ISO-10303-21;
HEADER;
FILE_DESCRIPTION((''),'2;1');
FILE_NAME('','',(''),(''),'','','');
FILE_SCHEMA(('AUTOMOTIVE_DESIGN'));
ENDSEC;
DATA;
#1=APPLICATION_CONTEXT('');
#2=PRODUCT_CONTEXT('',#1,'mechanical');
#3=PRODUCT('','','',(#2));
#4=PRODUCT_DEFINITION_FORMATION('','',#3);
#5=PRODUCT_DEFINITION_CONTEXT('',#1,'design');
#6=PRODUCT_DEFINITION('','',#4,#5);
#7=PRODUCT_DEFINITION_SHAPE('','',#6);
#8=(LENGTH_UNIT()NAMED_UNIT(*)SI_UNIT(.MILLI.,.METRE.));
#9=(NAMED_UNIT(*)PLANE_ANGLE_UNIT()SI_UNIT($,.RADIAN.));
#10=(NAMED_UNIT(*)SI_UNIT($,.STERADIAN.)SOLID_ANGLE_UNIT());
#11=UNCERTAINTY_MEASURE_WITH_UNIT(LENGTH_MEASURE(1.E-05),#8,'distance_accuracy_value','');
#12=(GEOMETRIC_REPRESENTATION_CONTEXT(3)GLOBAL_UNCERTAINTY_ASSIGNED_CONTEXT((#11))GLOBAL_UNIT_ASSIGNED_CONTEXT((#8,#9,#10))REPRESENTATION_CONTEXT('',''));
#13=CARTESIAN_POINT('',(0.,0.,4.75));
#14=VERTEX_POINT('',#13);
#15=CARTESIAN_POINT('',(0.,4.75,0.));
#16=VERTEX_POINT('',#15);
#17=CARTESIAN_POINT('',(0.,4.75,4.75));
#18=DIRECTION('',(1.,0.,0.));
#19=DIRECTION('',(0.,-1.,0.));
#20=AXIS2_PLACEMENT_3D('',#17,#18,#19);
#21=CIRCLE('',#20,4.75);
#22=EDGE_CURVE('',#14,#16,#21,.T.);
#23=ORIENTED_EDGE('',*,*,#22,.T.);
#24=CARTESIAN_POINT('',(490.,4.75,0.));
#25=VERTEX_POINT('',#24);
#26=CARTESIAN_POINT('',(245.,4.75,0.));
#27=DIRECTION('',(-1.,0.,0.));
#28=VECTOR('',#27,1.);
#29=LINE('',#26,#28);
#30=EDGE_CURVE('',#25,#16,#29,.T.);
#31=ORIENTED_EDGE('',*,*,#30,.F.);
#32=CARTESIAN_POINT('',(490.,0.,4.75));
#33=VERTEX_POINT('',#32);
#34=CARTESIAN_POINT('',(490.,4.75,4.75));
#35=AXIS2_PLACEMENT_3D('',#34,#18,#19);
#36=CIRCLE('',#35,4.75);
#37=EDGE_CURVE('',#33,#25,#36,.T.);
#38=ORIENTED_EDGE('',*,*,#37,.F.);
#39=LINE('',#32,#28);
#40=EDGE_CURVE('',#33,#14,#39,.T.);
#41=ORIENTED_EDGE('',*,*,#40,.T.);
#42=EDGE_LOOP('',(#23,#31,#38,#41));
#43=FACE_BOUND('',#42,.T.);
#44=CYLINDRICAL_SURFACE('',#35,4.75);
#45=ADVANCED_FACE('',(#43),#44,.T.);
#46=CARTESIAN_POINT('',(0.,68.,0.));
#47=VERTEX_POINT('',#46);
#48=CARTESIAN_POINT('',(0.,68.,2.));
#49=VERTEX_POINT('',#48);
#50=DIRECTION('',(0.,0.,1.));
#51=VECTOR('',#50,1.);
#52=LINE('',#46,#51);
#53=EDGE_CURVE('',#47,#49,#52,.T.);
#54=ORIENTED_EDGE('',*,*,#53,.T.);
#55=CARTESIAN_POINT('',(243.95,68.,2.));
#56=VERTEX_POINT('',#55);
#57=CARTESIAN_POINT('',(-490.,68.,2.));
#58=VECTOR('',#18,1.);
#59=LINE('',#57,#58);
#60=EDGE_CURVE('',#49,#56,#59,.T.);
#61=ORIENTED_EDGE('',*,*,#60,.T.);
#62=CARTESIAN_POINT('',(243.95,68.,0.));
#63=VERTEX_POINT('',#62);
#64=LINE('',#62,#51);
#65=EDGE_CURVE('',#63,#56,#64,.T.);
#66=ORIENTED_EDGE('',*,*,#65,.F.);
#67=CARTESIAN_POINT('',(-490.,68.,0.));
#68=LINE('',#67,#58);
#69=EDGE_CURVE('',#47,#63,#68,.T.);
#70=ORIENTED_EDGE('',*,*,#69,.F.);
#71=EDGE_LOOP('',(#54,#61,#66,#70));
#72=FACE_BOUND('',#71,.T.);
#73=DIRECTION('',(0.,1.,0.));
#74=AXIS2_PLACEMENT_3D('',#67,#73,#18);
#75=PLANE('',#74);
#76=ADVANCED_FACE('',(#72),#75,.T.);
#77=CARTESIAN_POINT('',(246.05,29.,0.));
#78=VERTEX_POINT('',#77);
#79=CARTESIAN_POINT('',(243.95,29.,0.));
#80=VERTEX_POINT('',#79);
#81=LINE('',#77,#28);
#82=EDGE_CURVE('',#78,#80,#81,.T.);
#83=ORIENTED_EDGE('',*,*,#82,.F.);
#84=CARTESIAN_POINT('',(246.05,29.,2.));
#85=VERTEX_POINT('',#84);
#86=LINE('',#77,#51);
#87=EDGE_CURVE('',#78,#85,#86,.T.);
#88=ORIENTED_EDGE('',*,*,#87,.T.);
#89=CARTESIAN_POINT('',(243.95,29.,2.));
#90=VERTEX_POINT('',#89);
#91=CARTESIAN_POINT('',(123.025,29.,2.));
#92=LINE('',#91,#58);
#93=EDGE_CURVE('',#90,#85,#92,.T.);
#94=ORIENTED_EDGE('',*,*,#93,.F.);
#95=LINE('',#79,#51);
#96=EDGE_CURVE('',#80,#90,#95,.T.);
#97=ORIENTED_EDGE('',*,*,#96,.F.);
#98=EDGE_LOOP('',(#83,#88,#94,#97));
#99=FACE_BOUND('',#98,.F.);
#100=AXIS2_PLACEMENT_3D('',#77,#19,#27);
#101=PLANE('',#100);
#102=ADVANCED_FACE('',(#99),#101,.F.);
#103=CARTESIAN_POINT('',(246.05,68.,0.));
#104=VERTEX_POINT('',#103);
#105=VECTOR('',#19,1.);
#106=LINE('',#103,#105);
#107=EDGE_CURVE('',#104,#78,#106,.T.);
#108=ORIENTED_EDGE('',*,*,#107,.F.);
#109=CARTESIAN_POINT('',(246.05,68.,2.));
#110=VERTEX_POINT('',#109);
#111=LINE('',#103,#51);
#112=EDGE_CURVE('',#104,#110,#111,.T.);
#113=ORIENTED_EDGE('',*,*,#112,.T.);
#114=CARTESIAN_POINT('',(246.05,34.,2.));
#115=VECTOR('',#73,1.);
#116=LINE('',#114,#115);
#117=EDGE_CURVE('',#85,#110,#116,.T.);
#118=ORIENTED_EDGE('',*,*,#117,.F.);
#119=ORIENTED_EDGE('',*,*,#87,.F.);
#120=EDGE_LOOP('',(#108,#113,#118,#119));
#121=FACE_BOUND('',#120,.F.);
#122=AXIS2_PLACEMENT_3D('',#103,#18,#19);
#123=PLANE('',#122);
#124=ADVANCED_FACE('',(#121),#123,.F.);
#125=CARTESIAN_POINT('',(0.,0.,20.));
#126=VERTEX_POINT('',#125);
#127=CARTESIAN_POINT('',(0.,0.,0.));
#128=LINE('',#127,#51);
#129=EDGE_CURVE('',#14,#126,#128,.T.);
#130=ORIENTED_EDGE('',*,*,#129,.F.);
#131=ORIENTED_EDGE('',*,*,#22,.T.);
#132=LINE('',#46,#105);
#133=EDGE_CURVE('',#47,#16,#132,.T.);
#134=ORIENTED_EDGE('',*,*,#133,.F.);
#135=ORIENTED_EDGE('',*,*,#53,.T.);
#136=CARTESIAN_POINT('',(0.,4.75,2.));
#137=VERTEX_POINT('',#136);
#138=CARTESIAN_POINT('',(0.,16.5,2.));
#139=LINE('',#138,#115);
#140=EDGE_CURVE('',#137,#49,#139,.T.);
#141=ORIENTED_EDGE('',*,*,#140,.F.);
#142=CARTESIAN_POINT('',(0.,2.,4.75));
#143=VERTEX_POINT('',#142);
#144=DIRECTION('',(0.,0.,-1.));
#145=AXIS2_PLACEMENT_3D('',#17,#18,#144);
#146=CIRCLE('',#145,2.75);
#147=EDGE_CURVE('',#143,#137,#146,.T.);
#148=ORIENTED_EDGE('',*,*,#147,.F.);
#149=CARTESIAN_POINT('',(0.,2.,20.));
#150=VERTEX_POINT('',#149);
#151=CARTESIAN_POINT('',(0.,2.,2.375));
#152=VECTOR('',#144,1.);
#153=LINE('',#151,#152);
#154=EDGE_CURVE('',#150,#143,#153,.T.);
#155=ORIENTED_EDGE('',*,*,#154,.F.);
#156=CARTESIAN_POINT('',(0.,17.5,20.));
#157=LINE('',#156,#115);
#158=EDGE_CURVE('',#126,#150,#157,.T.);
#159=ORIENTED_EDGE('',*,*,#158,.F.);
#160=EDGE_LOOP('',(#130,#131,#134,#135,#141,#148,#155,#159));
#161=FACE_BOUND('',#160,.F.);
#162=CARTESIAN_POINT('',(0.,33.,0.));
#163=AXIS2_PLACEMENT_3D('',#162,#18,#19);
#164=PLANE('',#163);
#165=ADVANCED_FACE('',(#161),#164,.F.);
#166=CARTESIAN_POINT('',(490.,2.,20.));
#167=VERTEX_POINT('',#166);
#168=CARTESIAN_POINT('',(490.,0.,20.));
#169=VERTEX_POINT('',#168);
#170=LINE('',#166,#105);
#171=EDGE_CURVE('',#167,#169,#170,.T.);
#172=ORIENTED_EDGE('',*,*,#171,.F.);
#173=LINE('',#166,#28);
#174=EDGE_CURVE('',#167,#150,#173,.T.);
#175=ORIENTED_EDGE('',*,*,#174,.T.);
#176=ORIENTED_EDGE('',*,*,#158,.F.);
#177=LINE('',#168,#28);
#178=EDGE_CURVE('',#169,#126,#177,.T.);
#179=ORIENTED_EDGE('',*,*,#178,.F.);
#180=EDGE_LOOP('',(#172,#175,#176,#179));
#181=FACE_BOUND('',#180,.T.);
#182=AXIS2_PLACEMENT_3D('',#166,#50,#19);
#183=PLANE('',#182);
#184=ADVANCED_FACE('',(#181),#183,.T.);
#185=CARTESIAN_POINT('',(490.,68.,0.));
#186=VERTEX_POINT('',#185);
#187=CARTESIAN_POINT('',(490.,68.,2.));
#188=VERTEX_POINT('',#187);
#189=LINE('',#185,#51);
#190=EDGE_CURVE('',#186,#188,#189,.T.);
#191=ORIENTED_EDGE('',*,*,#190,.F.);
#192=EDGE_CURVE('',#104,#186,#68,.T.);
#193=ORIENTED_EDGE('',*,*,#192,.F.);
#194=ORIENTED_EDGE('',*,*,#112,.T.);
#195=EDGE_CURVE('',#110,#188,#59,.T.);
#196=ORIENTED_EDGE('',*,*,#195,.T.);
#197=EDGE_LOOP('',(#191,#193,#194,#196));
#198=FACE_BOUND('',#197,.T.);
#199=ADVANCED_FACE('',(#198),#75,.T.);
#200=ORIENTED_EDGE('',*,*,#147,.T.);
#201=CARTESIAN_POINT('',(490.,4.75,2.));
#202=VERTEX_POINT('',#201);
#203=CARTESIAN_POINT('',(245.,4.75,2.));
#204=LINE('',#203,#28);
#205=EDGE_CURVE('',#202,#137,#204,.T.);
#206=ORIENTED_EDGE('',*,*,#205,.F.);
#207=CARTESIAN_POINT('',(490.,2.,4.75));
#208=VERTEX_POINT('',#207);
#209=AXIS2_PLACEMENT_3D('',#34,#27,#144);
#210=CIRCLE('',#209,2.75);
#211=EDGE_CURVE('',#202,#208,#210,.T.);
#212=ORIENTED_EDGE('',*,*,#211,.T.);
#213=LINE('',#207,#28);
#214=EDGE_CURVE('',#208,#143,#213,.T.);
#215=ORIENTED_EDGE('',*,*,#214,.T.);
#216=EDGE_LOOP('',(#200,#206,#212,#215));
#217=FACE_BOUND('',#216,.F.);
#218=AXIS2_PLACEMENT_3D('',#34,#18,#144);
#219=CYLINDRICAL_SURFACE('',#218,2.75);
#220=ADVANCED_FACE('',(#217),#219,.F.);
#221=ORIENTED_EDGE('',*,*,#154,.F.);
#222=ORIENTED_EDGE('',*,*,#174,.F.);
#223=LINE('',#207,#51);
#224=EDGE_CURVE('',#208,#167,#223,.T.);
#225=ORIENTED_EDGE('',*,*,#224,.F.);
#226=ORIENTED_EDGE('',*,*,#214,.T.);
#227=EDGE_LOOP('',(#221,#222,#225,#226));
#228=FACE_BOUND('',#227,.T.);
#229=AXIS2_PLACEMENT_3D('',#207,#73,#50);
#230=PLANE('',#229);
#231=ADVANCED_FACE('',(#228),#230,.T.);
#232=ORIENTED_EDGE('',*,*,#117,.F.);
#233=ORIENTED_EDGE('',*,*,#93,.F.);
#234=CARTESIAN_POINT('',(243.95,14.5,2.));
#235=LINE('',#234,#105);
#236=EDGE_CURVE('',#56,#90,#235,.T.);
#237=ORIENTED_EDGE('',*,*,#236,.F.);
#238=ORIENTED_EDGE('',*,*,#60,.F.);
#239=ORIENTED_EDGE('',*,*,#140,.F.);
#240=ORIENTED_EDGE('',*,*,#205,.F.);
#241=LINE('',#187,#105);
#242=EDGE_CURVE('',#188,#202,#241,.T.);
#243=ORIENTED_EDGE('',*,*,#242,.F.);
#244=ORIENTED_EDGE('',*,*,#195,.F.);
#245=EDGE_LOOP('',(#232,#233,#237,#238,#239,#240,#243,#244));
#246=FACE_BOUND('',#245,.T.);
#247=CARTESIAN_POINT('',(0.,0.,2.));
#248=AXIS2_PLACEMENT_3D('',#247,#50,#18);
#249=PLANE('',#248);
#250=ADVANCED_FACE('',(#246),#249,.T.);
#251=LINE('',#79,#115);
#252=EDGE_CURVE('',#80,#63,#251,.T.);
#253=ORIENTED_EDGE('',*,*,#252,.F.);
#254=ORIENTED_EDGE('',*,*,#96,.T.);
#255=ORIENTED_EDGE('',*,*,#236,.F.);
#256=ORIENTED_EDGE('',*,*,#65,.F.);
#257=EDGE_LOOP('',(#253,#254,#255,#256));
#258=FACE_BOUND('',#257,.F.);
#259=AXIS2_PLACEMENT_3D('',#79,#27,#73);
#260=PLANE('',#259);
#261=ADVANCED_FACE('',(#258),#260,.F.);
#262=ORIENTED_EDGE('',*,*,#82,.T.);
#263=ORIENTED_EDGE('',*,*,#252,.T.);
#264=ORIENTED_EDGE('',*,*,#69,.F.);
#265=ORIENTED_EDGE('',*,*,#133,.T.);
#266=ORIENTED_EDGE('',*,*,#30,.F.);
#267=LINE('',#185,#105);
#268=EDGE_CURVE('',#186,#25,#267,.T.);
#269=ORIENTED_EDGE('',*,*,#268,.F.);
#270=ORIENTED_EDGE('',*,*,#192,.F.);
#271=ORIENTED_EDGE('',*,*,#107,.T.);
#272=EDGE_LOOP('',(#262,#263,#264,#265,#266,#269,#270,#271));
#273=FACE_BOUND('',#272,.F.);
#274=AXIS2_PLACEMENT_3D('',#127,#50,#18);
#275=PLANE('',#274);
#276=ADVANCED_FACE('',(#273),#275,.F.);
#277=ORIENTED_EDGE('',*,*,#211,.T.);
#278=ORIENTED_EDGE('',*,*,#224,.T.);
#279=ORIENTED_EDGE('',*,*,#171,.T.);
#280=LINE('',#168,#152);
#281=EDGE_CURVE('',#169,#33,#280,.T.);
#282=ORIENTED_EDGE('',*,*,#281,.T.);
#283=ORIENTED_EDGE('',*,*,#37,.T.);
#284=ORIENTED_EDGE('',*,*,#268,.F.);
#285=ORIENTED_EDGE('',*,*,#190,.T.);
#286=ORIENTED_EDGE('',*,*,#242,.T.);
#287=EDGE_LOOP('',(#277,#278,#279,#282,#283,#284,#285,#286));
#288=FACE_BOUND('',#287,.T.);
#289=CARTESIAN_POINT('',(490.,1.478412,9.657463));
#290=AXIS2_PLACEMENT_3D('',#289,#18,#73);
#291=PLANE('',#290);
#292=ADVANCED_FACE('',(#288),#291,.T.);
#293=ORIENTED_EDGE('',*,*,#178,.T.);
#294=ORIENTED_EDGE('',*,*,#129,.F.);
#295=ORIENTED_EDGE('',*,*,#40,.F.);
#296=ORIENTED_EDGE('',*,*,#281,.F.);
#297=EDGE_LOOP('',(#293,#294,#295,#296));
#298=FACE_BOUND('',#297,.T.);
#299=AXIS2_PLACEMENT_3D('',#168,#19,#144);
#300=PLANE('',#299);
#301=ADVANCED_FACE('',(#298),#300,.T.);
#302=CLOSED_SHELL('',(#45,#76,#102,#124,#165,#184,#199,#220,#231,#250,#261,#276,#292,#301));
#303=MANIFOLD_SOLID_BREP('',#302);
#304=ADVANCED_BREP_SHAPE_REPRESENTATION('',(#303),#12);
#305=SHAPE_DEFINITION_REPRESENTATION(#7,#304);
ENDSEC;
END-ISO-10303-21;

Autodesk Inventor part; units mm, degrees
ref_plane "YZ Plane" through (0, 0, 0) normal (1, 0, 0) x (0, 1, 0)
ref_plane "XZ Plane" through (0, 0, 0) normal (0, 1, 0) x (-1, 0, 0)
ref_plane "XY Plane" through (0, 0, 0) normal (0, 0, 1) x (1, 0, 0)
sketch "Sketch1" plane through (0, 0, 0) normal (0, 0, 1) x (1, 0, 0)
  line L0 (-490, 68) -> (490, 68)
  line L1 (490, 68) -> (490, 0)
  line L2 (490, 0) -> (-490, 0)
  line L3 (-490, 0) -> (-490, 68)
  point P0 (0, 0)
  point P1 (0, 0)
  dimension "d0" = 980
  dimension "d1" = 68
extrude "Plate1" add sketch "Sketch1" along normal blind 2
sketch "Sketch2" plane through (490, 2, 0) normal (0, -1, 0) x (1, 0, 0)
  line L0 (-980, 0) -> (0, 0)
  line L1 (0, 0) -> (0, 20)
  line L2 (0, 20) -> (-980, 20)
  line L3 (-980, 20) -> (-980, 0)
edge flange "Flange1" height 20 angle 90 thickness 2 bend radius 2.75 thickness toward (0, -1, 0) relief round relief width 2 relief depth 1 edges at (0, 0, 2) wall of the first edge with corners at (-490, 2, 0) (490, 2, 0) (490, 2, 20) (-490, 2, 20)
bend "Bend1"
corner "Corner1"
sketch "Sketch5" plane through (0, 0, 0) normal (0, 0, -1) x (-1, 0, 0)
  line L0 (490, 68) -> (-490, 68) projected
  line L1 (490, 0) -> (-490, 0) projected
  circle A0 centre (0, 68) radius 35
  line L2 (243.95, 68) -> (246.05, 68)
  line L3 (246.05, 68) -> (246.05, 29)
  line L4 (246.05, 29) -> (243.95, 29)
  line L5 (243.95, 29) -> (243.95, 68)
  line L6 (-243.95, 68) -> (-246.05, 68)
  line L7 (-246.05, 68) -> (-246.05, 29)
  line L8 (-246.05, 29) -> (-243.95, 29)
  line L9 (-243.95, 29) -> (-243.95, 68)
  line L10 (0, 68) -> (0, 0) construction
  line L11 (0, 68) -> (0, 0)
  line L12 (490, 68) -> (490, 4.75) projected
  line L13 (490, 0) -> (490, 4.75) projected
  line L14 (-490, 4.75) -> (-490, 68) projected
  line L15 (-490, 4.75) -> (-490, 0) projected
  point P0 (0, 0)
  point P1 (245, 29)
  point P2 (-245, 29)
  point P3 (-35, 68)
  point P4 (35, 68)
  dimension "d45" = 70
  dimension "d48" = 2.1
  dimension "d49" = 490
  dimension "d51" = 29
  dimension "d52" = 39
extrude "Extrusion1" cut sketch "Sketch5" against normal through all contours L12 L13 L1 L11 A0 L0 L5 L4 L3 | L3 L4 L5 L0 | A0 L11 L0 | L9 L8 L7 L0 picked at (23.0408, 65.4039)
sketch "Sketch9" plane through (0, 0, 2) normal (0, 0, 1) x (1, 0, 0)
  line L0 (485.6141, 29.596) -> (485.6141, 17.596) construction
  line L1 (485.6141, 17.596) -> (285.6141, 17.596) construction
  line L2 (285.6141, 17.596) -> (285.6141, 29.596) construction
  line L3 (285.6141, 29.596) -> (485.6141, 29.596) construction
  line L4 (-490, 68) -> (490, 68) projected
  point P0 (0, 0)
  point P1 (1.05, 68)
  dimension "d40" = 200
  dimension "d41" = 12
mark "Mark2"
equation "\"d1\" = СПИНА_Стрингер_2_высота"
equation "\"d2\" = Thickness"
equation "\"d3\" = BendReliefWidth"
equation "\"d4\" = BendReliefDepth"
equation "\"d5\" = MinimumRemnant"
equation "\"d6\" = TransitionRadius"
equation "\"d9\" = BendRadius"
equation "\"d10\" = CornerReliefSize"
equation "\"d11\" = GapSize"
equation "\"d12\" = JacobiRadiusSize"
equation "\"BendReliefWidth\" = Thickness"
equation "\"BendReliefDepth\" = 0.5 * Thickness"
equation "\"CornerReliefSize\" = 4 * Thickness"
equation "\"MinimumRemnant\" = 2 * Thickness"
equation "\"TransitionRadius\" = BendRadius"
equation "\"JacobiRadiusSize\" = BendRadius"
equation "\"GapSize\" = Thickness"
equation "\"СПИНА_Стрингер_2_высота\" = 68"
equation "\"Thickness\" = 2"
equation "\"BendRadius\" = 2.75"
properties part number "MSC 207 stringer back ^^" material "Stainless Steel"
